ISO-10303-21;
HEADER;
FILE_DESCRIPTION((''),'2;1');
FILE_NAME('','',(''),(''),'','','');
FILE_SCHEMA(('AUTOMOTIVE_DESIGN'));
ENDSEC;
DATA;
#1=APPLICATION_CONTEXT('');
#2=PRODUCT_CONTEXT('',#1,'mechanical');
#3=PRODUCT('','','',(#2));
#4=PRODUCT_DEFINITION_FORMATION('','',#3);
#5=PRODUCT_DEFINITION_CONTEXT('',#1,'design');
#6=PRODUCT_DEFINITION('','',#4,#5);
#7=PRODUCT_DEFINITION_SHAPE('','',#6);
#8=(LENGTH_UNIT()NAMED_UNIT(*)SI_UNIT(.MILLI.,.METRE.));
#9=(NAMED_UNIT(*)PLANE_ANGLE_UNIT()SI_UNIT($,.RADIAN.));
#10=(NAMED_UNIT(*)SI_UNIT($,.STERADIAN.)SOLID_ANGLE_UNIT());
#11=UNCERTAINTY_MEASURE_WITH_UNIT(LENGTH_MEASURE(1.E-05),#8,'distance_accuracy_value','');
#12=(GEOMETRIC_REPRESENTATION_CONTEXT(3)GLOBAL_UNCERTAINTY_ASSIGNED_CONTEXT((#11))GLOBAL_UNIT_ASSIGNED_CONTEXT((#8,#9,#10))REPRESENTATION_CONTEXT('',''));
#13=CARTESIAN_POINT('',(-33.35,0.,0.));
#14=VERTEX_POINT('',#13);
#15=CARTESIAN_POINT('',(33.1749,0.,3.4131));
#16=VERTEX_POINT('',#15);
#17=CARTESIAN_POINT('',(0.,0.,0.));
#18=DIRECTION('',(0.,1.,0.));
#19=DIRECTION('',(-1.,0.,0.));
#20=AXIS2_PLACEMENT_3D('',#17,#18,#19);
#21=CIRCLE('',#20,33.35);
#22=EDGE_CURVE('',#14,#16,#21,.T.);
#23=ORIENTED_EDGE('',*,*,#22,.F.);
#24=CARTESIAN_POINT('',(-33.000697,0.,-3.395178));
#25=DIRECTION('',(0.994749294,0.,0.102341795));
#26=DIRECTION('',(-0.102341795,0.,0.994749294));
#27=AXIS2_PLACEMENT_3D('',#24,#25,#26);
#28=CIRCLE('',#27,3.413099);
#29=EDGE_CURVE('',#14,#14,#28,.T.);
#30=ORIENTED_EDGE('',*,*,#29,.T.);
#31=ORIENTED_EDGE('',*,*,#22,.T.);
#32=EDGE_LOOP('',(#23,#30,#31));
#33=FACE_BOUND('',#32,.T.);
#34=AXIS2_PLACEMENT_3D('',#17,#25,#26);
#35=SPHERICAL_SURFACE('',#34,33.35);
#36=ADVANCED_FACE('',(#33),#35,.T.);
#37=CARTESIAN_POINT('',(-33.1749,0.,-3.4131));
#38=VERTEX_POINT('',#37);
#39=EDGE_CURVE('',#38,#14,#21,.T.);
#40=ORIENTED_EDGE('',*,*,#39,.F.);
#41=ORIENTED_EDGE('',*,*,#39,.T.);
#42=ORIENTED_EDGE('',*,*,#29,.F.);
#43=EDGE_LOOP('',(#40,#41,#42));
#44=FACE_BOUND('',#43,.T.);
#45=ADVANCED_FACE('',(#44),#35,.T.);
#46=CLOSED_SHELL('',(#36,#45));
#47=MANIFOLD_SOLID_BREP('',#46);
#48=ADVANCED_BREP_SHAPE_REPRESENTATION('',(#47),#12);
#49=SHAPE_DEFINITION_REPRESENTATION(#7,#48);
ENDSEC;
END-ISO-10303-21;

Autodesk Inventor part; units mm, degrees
ref_plane "YZ Plane" through (0, 0, 0) normal (1, 0, 0) x (0, 1, 0)
ref_plane "XZ Plane" through (0, 0, 0) normal (0, 1, 0) x (-1, 0, 0)
ref_plane "XY Plane" through (0, 0, 0) normal (0, 0, 1) x (1, 0, 0)
sketch "Sketch1" plane through (0, 0, 0) normal (0, 1, 0) x (-1, 0, 0)
  circle A0 centre (0, 0) radius 33.35
  line L0 (33.1749, -3.4131) -> (-33.1749, 3.4131)
  dimension "LightBulb_MaxSize" = 66.7
revolve "Revolution1" add sketch "Sketch1" angle 360 about axis through (-33.1749, 0, -3.4131) along (0.9947494, 0, 0.1023405) picked at (-7.394, 14.2479) contours A0 L0
properties part number "LightBulb_MaxSize" material "Rubber"
